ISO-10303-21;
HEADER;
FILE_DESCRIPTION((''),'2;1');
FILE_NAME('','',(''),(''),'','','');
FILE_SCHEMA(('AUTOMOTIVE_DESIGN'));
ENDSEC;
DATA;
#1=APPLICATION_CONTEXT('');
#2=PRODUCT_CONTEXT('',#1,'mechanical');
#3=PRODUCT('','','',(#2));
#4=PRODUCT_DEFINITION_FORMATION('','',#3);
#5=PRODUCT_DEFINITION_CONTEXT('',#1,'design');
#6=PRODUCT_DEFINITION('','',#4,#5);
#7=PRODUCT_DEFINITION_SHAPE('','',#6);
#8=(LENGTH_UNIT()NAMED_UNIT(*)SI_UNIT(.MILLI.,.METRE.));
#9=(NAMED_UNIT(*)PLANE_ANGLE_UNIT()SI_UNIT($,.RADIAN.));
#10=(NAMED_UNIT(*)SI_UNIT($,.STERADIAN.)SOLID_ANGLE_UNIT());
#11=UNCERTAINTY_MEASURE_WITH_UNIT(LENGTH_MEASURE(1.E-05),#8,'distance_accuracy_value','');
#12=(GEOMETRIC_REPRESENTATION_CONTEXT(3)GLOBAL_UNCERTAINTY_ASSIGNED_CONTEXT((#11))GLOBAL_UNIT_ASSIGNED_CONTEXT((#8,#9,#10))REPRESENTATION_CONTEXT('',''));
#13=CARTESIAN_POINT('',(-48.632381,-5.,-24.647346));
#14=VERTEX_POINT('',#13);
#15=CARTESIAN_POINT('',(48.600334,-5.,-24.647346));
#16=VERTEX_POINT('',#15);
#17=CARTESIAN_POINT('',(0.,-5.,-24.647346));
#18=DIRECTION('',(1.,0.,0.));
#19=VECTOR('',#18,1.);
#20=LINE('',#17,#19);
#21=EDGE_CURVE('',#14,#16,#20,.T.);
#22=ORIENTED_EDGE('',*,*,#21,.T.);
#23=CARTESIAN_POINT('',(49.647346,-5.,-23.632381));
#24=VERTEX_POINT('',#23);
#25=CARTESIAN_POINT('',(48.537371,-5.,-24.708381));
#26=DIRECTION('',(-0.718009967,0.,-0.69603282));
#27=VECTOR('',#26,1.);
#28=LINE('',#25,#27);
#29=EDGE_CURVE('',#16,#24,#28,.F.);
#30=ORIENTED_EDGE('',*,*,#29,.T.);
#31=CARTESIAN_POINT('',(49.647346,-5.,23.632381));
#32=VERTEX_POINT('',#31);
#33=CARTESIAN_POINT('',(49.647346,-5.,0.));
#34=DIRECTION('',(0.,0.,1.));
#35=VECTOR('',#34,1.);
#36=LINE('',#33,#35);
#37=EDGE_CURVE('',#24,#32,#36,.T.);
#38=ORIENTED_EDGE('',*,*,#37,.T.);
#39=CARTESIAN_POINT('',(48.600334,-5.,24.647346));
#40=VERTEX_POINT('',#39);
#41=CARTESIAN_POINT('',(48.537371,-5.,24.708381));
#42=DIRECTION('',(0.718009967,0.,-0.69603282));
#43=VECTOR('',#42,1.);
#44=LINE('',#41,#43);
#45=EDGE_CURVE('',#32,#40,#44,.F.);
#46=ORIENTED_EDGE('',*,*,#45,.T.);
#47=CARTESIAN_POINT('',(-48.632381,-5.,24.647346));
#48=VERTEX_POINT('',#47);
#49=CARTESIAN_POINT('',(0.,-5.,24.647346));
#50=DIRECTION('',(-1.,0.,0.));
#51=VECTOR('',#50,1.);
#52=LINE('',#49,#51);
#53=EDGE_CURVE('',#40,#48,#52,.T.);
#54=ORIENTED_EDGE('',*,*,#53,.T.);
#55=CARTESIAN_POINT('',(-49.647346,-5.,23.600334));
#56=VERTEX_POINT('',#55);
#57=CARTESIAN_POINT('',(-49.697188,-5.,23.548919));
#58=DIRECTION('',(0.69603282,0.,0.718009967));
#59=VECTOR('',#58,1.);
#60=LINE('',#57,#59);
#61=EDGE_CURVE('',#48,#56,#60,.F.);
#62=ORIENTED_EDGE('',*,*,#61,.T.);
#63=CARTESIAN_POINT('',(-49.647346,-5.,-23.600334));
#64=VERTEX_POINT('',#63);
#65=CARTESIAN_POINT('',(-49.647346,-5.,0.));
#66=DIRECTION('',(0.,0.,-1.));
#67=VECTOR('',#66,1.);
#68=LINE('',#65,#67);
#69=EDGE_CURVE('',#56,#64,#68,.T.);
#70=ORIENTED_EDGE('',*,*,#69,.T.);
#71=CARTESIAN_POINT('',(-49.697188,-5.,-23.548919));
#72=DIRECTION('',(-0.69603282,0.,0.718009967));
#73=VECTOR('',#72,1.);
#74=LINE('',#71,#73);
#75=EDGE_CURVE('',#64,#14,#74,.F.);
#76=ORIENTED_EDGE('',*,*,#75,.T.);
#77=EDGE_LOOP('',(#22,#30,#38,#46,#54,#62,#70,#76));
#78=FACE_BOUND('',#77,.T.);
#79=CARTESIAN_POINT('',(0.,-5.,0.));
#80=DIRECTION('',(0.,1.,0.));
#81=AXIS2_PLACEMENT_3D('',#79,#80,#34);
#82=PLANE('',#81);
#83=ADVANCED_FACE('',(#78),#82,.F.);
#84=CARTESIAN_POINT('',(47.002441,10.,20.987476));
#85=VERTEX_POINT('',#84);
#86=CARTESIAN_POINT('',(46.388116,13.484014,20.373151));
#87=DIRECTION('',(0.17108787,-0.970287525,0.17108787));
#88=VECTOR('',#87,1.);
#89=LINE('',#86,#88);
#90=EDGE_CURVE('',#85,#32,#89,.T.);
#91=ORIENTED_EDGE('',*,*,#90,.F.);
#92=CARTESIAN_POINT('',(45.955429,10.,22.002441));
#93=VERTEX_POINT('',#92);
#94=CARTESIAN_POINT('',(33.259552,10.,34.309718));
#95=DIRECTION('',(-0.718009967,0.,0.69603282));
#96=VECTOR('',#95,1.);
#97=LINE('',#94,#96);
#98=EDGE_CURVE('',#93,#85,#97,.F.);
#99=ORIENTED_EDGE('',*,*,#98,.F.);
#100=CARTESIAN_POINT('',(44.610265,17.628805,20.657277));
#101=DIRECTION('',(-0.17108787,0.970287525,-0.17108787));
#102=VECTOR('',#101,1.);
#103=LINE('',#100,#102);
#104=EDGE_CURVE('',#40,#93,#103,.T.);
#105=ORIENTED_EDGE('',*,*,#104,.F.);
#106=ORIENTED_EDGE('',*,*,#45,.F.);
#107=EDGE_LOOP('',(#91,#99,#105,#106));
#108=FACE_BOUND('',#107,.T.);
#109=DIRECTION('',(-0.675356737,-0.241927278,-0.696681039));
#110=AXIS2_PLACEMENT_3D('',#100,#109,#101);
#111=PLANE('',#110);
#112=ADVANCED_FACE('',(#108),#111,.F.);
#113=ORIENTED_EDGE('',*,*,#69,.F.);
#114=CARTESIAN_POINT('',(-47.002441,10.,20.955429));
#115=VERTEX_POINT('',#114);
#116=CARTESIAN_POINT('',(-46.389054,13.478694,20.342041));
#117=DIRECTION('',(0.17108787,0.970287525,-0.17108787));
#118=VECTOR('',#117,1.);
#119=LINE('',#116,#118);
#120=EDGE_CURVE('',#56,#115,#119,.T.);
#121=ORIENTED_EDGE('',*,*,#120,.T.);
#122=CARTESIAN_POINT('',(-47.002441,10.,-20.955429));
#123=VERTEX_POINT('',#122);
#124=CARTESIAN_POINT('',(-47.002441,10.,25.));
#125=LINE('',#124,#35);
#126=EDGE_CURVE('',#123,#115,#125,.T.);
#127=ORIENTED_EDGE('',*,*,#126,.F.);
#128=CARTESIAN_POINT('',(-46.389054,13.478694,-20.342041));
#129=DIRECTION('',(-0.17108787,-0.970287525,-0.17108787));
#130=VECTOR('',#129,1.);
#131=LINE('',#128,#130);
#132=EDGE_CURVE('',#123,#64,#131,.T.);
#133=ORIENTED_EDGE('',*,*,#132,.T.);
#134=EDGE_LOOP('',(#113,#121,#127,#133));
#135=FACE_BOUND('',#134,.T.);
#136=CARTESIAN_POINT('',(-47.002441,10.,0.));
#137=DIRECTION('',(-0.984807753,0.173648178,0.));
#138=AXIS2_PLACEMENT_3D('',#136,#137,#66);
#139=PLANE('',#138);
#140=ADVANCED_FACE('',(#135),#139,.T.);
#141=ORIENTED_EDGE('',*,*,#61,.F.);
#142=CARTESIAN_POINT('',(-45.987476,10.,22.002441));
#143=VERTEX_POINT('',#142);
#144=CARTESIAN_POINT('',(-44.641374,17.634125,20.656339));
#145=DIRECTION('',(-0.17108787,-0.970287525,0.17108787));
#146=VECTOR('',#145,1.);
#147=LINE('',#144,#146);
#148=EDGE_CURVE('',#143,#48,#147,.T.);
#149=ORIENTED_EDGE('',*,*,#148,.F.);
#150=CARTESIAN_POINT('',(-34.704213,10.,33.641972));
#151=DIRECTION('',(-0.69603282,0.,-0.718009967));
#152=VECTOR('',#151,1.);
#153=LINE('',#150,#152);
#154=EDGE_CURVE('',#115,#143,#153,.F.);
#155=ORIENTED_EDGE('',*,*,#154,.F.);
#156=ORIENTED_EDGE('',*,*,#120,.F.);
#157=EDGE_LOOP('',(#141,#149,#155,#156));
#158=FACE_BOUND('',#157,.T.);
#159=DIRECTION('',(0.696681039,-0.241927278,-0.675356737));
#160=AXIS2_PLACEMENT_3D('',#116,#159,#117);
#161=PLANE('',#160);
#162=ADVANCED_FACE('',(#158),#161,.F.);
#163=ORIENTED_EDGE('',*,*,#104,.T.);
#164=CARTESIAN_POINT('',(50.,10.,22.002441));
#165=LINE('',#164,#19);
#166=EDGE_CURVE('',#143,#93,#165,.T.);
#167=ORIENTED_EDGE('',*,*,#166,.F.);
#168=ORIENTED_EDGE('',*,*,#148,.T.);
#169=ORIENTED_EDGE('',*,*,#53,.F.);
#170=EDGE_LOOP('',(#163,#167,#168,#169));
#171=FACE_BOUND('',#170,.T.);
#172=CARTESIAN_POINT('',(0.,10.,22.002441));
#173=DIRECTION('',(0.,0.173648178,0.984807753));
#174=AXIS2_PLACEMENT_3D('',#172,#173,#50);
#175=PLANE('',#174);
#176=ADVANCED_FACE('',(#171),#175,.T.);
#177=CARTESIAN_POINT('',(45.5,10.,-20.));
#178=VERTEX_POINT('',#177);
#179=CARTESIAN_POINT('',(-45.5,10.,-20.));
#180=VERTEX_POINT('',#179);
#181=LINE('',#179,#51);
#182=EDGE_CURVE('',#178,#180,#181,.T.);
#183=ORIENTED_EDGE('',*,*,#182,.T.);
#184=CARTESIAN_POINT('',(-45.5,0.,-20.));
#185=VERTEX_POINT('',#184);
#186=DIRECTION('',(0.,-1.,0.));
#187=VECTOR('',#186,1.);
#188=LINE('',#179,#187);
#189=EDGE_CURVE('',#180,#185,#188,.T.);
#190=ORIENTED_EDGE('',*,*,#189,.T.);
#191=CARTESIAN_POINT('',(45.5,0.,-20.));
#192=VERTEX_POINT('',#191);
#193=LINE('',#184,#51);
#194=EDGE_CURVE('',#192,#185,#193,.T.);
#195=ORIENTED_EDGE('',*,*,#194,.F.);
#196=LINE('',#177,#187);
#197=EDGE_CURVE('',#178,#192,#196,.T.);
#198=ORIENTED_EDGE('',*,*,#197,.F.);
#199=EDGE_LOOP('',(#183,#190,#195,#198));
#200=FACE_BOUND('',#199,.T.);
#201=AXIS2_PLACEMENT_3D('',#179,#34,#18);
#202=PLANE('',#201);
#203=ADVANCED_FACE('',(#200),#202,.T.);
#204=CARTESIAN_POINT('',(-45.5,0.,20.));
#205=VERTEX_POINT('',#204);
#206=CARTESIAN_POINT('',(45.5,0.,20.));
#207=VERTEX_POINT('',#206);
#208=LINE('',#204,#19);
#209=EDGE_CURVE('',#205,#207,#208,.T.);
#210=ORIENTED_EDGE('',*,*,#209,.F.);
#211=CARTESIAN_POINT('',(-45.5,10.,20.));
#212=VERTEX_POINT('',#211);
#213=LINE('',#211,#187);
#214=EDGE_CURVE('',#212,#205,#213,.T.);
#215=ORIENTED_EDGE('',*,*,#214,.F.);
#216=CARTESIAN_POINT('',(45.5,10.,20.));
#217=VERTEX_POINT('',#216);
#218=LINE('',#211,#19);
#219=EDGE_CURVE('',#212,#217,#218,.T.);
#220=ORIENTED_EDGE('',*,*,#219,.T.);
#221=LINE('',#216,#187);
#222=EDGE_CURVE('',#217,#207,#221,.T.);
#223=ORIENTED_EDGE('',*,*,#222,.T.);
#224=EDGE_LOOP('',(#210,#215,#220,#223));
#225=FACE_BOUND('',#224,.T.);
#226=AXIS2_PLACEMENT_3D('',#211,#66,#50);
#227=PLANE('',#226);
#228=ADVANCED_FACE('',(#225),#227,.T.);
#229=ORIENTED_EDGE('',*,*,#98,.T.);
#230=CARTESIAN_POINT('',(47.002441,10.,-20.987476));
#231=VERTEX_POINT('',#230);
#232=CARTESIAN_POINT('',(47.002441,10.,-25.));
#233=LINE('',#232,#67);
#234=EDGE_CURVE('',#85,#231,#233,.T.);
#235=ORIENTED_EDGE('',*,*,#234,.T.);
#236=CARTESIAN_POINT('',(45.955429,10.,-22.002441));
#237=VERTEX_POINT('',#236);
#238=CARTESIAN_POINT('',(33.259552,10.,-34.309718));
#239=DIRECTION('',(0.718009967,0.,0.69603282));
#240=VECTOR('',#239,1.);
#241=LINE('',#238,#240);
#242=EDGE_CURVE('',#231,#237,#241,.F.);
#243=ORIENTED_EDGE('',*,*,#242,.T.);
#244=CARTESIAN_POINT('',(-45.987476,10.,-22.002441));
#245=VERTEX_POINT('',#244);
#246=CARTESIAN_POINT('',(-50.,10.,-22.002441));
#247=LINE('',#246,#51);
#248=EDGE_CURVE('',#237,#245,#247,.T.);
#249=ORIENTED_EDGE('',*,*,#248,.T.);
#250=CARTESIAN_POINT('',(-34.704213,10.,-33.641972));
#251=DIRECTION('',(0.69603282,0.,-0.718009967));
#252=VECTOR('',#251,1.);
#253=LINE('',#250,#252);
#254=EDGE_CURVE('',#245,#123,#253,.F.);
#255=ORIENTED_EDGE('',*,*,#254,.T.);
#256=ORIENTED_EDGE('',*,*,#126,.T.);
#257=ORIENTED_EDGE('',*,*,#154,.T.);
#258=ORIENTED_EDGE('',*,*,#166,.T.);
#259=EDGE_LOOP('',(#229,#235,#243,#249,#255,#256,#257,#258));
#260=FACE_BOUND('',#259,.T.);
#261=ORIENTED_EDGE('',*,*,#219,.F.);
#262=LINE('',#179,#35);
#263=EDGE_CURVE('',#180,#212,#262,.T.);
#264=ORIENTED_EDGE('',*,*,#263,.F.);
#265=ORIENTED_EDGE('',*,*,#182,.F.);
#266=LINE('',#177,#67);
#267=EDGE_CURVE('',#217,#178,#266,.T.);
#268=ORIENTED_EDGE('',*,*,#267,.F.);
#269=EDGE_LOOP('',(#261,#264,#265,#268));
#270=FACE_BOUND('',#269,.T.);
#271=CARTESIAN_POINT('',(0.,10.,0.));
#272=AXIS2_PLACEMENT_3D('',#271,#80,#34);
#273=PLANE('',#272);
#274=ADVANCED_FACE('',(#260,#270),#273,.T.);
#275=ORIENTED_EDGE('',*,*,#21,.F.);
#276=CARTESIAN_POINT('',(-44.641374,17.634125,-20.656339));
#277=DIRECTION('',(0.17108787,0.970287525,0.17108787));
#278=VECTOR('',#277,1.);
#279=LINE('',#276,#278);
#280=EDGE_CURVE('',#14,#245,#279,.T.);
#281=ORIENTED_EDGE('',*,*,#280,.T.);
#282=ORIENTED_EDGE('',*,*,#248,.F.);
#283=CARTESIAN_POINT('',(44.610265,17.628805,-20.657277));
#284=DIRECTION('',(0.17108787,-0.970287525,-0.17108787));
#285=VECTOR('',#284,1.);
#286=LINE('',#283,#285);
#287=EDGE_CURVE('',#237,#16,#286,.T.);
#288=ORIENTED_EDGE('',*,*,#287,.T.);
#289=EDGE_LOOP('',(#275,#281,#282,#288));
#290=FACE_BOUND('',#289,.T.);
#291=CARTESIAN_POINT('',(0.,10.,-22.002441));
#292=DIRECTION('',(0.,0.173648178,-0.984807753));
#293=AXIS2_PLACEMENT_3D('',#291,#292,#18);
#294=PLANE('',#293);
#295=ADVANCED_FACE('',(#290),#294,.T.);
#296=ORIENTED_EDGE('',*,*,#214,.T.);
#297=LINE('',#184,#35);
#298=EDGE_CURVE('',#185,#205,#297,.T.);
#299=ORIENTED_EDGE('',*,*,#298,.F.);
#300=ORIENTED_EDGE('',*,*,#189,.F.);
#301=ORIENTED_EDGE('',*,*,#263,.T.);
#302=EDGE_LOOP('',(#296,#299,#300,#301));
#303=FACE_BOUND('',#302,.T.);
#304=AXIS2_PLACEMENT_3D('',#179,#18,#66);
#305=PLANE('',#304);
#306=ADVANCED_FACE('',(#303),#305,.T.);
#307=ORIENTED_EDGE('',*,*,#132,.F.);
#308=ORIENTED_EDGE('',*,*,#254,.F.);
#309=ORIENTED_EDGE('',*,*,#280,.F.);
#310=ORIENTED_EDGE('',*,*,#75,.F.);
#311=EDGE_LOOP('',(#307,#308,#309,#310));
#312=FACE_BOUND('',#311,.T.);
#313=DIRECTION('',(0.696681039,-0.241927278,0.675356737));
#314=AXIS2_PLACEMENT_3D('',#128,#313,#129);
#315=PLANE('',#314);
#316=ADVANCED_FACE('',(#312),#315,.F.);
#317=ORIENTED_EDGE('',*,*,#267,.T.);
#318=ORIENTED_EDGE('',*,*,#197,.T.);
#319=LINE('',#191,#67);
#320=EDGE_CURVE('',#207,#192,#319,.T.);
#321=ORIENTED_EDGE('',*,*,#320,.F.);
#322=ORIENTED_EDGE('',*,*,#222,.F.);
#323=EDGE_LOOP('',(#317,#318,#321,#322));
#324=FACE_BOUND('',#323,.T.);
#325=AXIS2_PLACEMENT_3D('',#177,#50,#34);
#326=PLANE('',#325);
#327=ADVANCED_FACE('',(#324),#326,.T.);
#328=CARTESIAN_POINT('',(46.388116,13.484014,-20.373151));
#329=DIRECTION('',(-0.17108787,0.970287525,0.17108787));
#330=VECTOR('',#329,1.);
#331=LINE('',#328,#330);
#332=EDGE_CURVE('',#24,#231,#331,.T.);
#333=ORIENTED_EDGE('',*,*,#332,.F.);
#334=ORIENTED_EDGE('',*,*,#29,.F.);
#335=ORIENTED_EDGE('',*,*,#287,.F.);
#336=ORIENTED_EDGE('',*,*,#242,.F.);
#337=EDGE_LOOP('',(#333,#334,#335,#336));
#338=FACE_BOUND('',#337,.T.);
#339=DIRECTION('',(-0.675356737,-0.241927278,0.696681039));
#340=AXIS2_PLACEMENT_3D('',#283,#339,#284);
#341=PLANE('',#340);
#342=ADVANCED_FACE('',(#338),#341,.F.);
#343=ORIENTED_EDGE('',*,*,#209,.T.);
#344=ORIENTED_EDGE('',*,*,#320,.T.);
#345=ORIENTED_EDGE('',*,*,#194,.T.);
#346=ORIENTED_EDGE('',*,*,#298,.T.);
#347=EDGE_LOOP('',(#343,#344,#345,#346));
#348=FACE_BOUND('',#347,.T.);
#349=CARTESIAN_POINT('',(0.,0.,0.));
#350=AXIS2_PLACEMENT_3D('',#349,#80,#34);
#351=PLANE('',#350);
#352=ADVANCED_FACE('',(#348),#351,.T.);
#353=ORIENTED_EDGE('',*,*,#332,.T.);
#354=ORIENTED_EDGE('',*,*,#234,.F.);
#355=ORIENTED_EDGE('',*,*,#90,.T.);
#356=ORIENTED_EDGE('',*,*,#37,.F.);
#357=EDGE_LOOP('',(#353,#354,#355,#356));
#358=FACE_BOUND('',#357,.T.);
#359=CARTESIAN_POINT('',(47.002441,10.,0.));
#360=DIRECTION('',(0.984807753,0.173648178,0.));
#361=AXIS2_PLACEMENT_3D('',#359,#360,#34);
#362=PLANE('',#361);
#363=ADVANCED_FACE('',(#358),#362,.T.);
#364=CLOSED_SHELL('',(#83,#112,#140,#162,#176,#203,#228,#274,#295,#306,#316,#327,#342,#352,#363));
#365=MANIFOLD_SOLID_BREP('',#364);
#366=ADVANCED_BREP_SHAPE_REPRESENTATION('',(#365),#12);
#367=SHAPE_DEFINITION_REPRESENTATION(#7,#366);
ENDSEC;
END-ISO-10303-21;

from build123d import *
from OCP.BRepFilletAPI import BRepFilletAPI_MakeChamfer

# Parameters (mm, degrees)
SKETCH2_W           = 100
SKETCH2_H           = 50
SKETCH2_W_2         = 91
SKETCH2_H_2         = 40
BOSS_EXTRUDE1_DEPTH = 10
SKETCH3_W           = 100
SKETCH3_H           = 50
BOSS_EXTRUDE2_DEPTH = 5
CHAMFER1_SIZE       = 17
CHAMFER1_SIZE_2     = 2.997558672
CHAMFER2_SIZE       = 1
CHAMFER2_SIZE2      = 1.031574872


with BuildPart() as part:
    # Sketch2 → Boss-Extrude1 (new body)
    with BuildSketch(Plane(origin=(0, 0, 0), x_dir=(1, 0, 0), z_dir=(0, 1, 0))):
        Rectangle(SKETCH2_W, SKETCH2_H)
        Rectangle(SKETCH2_W_2, SKETCH2_H_2, mode=Mode.SUBTRACT)
    extrude(amount=BOSS_EXTRUDE1_DEPTH)

    # Sketch3 → Boss-Extrude2 (add)
    with BuildSketch(Plane.XZ):
        Rectangle(SKETCH3_W, SKETCH3_H)
    extrude(amount=BOSS_EXTRUDE2_DEPTH)

    # Chamfer1
    # the kernel refuses this chamfer: 17, 2.997558672 mm, written as the material it takes off along each edge
    with BuildSketch(Plane(origin=(-50, 10, 69.175159539), x_dir=(-0.0066825316561016975, -0.9999776716360548, 0), z_dir=(0, 0, -1)), Plane(origin=(50, 10, -69.175159539), x_dir=(0.0066825316561016975, -0.9999776716360548, 0), z_dir=(0, 0, 1))) as chamfer1_piece_1:
        Polygon((CHAMFER1_SIZE * 0.999977671636, -CHAMFER1_SIZE * 0.0066825316561), (-CHAMFER1_SIZE_2 * 0.0066825316562, -CHAMFER1_SIZE_2 * 0.999977671651), (0, 0), align=None)
    extrude(amount=138.350319078, mode=Mode.SUBTRACT)
    with BuildSketch(Plane(origin=(-94.175159539, 10, -25), x_dir=(0, -0.9999776716360548, -0.0066825316561016975), z_dir=(1, 0, 0)), Plane(origin=(94.175159539, 10, 25), x_dir=(0, -0.9999776716360548, 0.0066825316561016975), z_dir=(-1, 0, 0))) as chamfer1_piece_2:
        Polygon((CHAMFER1_SIZE * 0.999977671636, -CHAMFER1_SIZE * 0.0066825316561), (-CHAMFER1_SIZE_2 * 0.0066825316562, -CHAMFER1_SIZE_2 * 0.999977671651), (0, 0), align=None)
    extrude(amount=188.350319078, mode=Mode.SUBTRACT)

    # Chamfer2: one chamfer whose edges measure the first distance from different faces: ONE call of the kernel's chamfer builder (chamfer() names one face for all edges)
    chamfer2_edges_1 = [part.edges().sort_by_distance(p)[0] for p in [
        (48.324893683, 2.5, -23.324893683),
        (48.324893683, 2.5, 23.324893683),
    ]]
    chamfer2_side_1 = [part.faces().sort_by_distance(p)[0] for p in [
        (48.349886727, 2.358257408, 0),
    ]]
    chamfer2_edges_2 = [part.edges().sort_by_distance(p)[0] for p in [
        (-48.324893683, 2.5, -23.324893683),
    ]]
    chamfer2_side_2 = [part.faces().sort_by_distance(p)[0] for p in [
        (0, 2.431585346, -23.336957033),
    ]]
    chamfer2_edges_3 = [part.edges().sort_by_distance(p)[0] for p in [
        (-48.324893683, 2.5, 23.324893683),
    ]]
    chamfer2_side_3 = [part.faces().sort_by_distance(p)[0] for p in [
        (0, 2.431585346, 23.336957033),
    ]]
    chamfer2 = BRepFilletAPI_MakeChamfer(part.part.solid().wrapped)
    for e in chamfer2_edges_1:
        chamfer2.Add(CHAMFER2_SIZE, CHAMFER2_SIZE2, e.wrapped, chamfer2_side_1[0].wrapped)  # the first distance lies on this face
    for e in chamfer2_edges_2:
        chamfer2.Add(CHAMFER2_SIZE, CHAMFER2_SIZE2, e.wrapped, chamfer2_side_2[0].wrapped)  # the first distance lies on this face
    for e in chamfer2_edges_3:
        chamfer2.Add(CHAMFER2_SIZE, CHAMFER2_SIZE2, e.wrapped, chamfer2_side_3[0].wrapped)  # the first distance lies on this face
    add(Compound.cast(chamfer2.Shape()), mode=Mode.REPLACE)


solid = part.part
